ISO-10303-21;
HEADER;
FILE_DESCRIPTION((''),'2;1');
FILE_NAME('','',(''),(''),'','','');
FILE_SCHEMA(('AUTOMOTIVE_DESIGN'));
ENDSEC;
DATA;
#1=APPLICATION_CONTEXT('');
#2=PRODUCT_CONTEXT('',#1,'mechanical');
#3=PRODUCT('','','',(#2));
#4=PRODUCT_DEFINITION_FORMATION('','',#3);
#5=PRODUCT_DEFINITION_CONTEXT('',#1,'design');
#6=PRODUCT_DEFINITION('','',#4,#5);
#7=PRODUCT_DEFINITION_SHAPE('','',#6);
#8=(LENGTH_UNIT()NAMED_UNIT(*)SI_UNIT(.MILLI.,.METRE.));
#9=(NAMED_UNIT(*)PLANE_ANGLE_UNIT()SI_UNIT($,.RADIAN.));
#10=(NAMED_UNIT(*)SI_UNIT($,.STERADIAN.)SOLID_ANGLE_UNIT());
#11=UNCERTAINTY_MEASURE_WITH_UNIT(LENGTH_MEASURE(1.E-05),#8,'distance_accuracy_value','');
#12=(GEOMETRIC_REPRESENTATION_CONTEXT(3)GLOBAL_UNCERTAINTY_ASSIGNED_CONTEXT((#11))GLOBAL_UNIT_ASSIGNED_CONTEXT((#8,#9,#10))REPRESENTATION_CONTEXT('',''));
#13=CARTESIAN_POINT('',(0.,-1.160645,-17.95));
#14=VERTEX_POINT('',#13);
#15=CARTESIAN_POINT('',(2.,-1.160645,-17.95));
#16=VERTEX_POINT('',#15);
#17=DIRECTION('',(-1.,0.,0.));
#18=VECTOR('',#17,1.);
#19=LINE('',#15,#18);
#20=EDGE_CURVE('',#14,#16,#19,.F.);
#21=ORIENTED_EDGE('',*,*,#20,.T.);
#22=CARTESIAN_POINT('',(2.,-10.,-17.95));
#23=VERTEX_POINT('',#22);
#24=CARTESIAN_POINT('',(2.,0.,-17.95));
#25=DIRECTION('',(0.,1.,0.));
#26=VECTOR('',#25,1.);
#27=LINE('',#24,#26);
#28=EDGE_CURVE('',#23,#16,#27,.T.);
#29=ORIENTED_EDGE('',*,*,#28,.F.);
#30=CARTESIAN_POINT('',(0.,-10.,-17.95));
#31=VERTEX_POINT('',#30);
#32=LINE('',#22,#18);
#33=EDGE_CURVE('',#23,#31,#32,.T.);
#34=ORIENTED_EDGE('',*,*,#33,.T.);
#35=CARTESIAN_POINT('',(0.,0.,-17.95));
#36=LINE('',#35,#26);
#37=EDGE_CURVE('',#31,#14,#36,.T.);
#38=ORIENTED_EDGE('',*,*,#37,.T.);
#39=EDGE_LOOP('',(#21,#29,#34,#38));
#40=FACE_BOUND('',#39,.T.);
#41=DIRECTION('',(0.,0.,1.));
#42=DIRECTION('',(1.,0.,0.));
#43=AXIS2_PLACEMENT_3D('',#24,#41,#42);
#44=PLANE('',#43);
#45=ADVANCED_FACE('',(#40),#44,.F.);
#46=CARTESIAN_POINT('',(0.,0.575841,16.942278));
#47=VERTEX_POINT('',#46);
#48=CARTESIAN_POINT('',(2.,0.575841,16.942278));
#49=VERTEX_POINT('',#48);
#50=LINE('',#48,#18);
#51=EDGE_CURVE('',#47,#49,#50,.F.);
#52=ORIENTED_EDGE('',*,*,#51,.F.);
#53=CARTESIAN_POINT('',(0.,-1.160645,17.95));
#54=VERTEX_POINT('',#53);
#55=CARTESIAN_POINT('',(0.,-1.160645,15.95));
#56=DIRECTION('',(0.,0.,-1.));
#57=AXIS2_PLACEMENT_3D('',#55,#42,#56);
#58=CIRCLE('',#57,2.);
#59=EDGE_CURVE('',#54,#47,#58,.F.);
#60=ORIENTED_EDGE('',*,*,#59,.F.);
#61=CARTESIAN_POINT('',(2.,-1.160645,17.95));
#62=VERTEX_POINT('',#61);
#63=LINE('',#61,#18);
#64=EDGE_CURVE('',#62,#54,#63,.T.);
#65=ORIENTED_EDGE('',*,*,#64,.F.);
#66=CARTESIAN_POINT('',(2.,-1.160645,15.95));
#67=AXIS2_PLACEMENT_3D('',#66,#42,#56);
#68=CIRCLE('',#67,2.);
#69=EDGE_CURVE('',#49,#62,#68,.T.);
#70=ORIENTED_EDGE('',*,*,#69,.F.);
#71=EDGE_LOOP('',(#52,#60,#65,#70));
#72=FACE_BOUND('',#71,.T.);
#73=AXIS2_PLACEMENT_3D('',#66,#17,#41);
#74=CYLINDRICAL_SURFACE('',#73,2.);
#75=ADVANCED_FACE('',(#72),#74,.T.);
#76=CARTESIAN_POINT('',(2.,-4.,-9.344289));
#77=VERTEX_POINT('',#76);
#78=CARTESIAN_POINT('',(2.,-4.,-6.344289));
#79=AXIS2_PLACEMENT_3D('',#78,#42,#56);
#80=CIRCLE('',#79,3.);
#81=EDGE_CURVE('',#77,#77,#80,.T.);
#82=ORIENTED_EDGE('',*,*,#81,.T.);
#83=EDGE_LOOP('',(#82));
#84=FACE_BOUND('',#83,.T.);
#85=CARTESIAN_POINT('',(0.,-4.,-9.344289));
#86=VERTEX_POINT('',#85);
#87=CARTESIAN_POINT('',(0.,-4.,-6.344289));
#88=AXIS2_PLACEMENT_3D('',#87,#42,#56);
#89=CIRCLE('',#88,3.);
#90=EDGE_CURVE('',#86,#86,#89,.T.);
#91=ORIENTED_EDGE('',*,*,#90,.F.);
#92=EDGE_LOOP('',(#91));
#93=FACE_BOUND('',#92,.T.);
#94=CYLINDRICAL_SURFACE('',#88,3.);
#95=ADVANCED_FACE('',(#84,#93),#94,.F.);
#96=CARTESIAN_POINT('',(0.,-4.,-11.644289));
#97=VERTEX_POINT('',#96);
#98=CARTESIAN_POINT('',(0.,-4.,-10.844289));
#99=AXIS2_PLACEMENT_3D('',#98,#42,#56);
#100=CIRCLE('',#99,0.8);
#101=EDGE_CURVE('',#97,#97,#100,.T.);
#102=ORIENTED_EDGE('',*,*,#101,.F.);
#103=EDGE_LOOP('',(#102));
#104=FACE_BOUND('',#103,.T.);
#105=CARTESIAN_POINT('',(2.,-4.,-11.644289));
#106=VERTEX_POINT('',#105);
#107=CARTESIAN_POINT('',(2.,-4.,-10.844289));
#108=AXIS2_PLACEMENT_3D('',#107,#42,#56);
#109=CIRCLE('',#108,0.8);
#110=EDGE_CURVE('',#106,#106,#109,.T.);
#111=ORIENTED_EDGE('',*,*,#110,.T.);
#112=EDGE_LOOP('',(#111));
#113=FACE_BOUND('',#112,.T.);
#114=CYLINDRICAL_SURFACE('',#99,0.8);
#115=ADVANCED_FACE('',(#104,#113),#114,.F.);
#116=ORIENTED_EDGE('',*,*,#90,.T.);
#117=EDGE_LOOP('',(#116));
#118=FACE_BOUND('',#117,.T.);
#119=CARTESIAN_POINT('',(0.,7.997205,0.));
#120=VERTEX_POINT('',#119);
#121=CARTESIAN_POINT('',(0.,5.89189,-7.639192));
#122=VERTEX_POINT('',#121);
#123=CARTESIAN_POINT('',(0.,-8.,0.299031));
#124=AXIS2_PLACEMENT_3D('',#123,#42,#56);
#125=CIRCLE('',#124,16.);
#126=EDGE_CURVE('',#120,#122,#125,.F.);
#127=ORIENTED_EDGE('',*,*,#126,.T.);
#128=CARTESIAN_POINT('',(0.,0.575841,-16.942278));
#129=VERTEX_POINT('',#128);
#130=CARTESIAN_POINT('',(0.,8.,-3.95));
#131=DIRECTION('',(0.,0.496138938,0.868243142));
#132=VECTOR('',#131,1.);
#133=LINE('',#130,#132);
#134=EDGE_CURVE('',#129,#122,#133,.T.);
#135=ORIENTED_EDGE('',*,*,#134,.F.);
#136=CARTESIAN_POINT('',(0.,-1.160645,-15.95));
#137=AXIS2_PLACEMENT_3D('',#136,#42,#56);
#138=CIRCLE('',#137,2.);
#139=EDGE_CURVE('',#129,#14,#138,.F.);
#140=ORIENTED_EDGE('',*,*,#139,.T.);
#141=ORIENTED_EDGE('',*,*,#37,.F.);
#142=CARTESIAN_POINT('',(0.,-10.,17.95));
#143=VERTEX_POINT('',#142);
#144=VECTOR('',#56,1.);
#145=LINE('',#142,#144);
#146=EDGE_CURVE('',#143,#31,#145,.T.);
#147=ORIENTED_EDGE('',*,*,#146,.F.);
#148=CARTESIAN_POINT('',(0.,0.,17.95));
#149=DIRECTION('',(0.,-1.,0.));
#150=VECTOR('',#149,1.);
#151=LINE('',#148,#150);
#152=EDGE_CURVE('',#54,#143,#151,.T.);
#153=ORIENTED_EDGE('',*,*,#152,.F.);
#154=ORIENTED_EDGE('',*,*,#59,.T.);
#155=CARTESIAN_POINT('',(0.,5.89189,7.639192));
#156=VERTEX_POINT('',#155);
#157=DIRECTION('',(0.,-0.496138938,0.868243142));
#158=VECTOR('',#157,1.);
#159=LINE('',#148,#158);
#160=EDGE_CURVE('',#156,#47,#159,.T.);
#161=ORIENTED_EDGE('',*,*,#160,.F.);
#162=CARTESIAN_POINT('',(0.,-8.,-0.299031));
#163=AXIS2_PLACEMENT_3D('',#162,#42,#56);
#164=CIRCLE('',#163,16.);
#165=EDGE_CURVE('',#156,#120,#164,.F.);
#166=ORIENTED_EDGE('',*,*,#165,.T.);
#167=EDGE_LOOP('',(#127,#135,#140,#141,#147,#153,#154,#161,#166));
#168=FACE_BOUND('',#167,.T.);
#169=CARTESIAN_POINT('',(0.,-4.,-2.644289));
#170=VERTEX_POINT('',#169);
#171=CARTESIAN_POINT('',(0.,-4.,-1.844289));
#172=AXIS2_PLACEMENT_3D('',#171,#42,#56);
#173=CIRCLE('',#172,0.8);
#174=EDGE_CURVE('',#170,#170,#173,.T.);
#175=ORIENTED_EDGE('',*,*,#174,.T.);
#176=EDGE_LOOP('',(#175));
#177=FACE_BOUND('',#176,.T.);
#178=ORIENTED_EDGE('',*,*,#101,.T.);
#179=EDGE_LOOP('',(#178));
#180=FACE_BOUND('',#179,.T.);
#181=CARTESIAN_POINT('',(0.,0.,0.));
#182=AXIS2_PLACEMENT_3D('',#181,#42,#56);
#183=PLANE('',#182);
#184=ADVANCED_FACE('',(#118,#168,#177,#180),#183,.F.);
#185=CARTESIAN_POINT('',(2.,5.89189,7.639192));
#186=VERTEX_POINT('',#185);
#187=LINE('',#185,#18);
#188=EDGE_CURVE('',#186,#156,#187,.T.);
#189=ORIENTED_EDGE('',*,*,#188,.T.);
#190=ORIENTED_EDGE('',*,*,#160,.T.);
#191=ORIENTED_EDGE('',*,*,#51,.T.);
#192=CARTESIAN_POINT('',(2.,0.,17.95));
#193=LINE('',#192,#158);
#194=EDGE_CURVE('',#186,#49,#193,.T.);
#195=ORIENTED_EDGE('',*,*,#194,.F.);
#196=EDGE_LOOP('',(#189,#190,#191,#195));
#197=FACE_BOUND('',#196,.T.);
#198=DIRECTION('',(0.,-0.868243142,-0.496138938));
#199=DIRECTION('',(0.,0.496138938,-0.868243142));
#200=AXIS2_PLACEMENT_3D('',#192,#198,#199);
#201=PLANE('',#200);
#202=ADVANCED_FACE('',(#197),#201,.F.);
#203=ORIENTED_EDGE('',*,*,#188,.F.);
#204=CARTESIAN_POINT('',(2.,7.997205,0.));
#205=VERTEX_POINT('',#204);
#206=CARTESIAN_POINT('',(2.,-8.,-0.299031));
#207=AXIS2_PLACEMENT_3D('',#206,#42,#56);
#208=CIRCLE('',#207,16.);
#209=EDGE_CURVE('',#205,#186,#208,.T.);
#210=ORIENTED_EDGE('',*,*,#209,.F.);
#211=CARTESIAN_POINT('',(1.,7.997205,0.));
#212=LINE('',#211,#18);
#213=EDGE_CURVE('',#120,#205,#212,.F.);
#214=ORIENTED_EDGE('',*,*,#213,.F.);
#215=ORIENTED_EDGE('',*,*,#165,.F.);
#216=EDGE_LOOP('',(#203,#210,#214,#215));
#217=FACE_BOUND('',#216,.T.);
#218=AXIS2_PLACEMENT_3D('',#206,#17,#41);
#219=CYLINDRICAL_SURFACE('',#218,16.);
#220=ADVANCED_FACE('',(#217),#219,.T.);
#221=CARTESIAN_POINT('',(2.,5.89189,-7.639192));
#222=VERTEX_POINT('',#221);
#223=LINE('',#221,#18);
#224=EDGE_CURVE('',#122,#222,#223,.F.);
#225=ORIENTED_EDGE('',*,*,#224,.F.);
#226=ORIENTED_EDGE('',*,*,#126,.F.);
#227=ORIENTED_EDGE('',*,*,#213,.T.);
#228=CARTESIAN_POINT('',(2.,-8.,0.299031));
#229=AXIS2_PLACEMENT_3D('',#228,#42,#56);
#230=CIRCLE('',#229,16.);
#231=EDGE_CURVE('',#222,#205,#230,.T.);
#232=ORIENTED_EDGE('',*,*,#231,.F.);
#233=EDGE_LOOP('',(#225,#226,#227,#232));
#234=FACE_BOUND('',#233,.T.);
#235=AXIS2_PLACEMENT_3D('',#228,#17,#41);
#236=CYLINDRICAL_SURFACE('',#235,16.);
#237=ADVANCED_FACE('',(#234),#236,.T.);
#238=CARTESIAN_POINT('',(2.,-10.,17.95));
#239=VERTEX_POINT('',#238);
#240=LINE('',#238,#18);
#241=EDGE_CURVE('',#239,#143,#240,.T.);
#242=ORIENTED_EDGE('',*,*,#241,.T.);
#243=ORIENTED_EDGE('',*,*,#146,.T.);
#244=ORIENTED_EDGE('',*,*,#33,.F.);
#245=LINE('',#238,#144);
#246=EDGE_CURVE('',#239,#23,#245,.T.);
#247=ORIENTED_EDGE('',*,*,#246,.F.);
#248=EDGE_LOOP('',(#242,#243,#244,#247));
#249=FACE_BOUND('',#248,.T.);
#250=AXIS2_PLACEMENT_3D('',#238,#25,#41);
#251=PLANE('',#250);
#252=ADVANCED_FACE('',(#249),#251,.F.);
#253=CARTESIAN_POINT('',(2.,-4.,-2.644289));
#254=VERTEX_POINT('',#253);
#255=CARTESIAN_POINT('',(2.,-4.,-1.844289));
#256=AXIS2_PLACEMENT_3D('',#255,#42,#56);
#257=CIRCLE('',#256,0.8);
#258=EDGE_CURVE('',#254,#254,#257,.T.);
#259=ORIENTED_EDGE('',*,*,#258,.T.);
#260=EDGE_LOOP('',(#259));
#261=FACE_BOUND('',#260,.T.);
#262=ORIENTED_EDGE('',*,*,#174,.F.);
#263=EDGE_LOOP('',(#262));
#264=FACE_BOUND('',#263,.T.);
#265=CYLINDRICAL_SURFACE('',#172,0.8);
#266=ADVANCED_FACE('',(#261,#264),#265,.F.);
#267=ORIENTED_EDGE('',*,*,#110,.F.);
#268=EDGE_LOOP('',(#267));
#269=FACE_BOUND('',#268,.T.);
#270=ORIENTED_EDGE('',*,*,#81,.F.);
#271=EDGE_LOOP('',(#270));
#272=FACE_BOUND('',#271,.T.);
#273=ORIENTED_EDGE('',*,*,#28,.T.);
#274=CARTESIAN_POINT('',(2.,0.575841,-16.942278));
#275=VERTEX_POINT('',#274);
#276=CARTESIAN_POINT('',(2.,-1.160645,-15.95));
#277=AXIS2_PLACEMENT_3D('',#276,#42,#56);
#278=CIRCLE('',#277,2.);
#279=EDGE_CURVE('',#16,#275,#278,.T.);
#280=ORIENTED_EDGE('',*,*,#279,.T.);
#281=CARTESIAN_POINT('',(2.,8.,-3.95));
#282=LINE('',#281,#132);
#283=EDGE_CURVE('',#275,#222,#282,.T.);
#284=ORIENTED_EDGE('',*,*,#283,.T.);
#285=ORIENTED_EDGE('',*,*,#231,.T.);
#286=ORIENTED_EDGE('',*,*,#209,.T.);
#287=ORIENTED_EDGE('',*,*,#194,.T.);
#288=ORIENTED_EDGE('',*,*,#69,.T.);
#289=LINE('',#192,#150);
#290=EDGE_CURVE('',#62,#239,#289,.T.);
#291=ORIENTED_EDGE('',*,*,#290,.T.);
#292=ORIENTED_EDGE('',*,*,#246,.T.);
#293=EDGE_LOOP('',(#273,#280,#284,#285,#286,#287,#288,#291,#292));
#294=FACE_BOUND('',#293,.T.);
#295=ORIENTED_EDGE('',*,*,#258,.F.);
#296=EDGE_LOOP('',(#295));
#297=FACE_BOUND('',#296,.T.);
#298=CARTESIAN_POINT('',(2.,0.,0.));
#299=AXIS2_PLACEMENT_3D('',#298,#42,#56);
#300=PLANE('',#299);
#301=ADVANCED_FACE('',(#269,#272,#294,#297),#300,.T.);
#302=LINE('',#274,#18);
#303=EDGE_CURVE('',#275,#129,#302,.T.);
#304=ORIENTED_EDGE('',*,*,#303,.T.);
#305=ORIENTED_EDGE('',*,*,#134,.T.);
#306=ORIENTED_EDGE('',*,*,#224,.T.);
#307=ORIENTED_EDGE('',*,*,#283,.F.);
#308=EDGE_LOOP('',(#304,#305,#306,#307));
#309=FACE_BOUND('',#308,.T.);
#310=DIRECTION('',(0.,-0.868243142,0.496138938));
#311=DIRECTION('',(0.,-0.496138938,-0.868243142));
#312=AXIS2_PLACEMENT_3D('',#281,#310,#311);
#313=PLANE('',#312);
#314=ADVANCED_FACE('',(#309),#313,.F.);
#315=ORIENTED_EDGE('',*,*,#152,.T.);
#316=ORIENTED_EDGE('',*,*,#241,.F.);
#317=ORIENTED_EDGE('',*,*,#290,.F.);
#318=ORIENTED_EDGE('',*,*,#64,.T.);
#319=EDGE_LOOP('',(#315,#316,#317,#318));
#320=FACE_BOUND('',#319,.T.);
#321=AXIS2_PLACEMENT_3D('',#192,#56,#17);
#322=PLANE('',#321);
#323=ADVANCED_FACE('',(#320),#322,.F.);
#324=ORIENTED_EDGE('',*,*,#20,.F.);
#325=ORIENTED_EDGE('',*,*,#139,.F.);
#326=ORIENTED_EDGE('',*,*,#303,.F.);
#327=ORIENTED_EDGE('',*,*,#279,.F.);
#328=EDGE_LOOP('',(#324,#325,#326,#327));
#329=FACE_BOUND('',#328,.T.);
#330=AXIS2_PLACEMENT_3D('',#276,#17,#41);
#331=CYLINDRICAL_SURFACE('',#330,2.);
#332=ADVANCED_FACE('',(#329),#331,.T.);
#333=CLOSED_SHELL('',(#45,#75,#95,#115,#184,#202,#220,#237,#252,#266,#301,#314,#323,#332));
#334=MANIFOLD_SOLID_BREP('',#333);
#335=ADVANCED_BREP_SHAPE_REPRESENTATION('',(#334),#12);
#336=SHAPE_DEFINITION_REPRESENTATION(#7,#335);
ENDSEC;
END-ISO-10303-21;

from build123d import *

# Parameters (mm, degrees)
EXTRUDE_1_DEPTH     = 2
SKETCH_2_R          = 3
SKETCH_2_R_2        = 0.8
CUT_EXTRUDE_1_DEPTH = 2
FILLET_1_R          = 2
FILLET_3_R          = 16


with BuildPart() as part:
    # Эскиз1 → Бобышка-Вытянуть1 (new body)
    with BuildSketch(Plane(origin=(0, 0, 0), x_dir=(0, 0, -1), z_dir=(1, 0, 0))):
        Polygon((-17.95, 0), (-3.95, 8), (3.95, 8), (17.95, 0), (17.95, -10), (-17.95, -10), align=None)
    extrude(amount=EXTRUDE_1_DEPTH)

    # Эскиз2 → Вырез-Вытянуть1 (cut)
    with BuildSketch(Plane(origin=(2, 0, 0), x_dir=(0, 0, -1), z_dir=(1, 0, 0))):
        with Locations((6.34428877, -4)):
            Circle(SKETCH_2_R)
        with Locations((1.84428877, -4)):
            Circle(SKETCH_2_R_2)
        with Locations((10.84428877, -4)):
            Circle(SKETCH_2_R_2)
    extrude(amount=-CUT_EXTRUDE_1_DEPTH, mode=Mode.SUBTRACT)

    # Скругление1
    fillet_1_edges = [part.edges().sort_by_distance(p)[0] for p in [
        (1, 0, 17.95),
        (1, 0, -17.95),
    ]]
    fillet(fillet_1_edges, radius=FILLET_1_R)

    # Скругление3
    # the kernel refuses this fillet: 16 mm, written as the material it takes off along each edge
    with BuildSketch(Plane(origin=(-10.622577483, 8, -3.95), x_dir=(0, 0, 1), z_dir=(1, 0, 0)), Plane(origin=(-10.622577483, 8, 3.95), x_dir=(0, -0.496138938356834, 0.868243142124459), z_dir=(1, 0, 0))) as fillet_3_piece_1:
        with BuildLine():
            CenterArc((FILLET_3_R * 0.265564437075, FILLET_3_R), FILLET_3_R, 240.255118703, 29.744881297)
            Line((-FILLET_3_R * 0.230574501282, FILLET_3_R * 0.131756857876), (0, 0))
            Line((0, 0), (FILLET_3_R * 0.265564437075, 0))
        make_face()
    extrude(amount=23.245154966, mode=Mode.SUBTRACT)


solid = part.part
